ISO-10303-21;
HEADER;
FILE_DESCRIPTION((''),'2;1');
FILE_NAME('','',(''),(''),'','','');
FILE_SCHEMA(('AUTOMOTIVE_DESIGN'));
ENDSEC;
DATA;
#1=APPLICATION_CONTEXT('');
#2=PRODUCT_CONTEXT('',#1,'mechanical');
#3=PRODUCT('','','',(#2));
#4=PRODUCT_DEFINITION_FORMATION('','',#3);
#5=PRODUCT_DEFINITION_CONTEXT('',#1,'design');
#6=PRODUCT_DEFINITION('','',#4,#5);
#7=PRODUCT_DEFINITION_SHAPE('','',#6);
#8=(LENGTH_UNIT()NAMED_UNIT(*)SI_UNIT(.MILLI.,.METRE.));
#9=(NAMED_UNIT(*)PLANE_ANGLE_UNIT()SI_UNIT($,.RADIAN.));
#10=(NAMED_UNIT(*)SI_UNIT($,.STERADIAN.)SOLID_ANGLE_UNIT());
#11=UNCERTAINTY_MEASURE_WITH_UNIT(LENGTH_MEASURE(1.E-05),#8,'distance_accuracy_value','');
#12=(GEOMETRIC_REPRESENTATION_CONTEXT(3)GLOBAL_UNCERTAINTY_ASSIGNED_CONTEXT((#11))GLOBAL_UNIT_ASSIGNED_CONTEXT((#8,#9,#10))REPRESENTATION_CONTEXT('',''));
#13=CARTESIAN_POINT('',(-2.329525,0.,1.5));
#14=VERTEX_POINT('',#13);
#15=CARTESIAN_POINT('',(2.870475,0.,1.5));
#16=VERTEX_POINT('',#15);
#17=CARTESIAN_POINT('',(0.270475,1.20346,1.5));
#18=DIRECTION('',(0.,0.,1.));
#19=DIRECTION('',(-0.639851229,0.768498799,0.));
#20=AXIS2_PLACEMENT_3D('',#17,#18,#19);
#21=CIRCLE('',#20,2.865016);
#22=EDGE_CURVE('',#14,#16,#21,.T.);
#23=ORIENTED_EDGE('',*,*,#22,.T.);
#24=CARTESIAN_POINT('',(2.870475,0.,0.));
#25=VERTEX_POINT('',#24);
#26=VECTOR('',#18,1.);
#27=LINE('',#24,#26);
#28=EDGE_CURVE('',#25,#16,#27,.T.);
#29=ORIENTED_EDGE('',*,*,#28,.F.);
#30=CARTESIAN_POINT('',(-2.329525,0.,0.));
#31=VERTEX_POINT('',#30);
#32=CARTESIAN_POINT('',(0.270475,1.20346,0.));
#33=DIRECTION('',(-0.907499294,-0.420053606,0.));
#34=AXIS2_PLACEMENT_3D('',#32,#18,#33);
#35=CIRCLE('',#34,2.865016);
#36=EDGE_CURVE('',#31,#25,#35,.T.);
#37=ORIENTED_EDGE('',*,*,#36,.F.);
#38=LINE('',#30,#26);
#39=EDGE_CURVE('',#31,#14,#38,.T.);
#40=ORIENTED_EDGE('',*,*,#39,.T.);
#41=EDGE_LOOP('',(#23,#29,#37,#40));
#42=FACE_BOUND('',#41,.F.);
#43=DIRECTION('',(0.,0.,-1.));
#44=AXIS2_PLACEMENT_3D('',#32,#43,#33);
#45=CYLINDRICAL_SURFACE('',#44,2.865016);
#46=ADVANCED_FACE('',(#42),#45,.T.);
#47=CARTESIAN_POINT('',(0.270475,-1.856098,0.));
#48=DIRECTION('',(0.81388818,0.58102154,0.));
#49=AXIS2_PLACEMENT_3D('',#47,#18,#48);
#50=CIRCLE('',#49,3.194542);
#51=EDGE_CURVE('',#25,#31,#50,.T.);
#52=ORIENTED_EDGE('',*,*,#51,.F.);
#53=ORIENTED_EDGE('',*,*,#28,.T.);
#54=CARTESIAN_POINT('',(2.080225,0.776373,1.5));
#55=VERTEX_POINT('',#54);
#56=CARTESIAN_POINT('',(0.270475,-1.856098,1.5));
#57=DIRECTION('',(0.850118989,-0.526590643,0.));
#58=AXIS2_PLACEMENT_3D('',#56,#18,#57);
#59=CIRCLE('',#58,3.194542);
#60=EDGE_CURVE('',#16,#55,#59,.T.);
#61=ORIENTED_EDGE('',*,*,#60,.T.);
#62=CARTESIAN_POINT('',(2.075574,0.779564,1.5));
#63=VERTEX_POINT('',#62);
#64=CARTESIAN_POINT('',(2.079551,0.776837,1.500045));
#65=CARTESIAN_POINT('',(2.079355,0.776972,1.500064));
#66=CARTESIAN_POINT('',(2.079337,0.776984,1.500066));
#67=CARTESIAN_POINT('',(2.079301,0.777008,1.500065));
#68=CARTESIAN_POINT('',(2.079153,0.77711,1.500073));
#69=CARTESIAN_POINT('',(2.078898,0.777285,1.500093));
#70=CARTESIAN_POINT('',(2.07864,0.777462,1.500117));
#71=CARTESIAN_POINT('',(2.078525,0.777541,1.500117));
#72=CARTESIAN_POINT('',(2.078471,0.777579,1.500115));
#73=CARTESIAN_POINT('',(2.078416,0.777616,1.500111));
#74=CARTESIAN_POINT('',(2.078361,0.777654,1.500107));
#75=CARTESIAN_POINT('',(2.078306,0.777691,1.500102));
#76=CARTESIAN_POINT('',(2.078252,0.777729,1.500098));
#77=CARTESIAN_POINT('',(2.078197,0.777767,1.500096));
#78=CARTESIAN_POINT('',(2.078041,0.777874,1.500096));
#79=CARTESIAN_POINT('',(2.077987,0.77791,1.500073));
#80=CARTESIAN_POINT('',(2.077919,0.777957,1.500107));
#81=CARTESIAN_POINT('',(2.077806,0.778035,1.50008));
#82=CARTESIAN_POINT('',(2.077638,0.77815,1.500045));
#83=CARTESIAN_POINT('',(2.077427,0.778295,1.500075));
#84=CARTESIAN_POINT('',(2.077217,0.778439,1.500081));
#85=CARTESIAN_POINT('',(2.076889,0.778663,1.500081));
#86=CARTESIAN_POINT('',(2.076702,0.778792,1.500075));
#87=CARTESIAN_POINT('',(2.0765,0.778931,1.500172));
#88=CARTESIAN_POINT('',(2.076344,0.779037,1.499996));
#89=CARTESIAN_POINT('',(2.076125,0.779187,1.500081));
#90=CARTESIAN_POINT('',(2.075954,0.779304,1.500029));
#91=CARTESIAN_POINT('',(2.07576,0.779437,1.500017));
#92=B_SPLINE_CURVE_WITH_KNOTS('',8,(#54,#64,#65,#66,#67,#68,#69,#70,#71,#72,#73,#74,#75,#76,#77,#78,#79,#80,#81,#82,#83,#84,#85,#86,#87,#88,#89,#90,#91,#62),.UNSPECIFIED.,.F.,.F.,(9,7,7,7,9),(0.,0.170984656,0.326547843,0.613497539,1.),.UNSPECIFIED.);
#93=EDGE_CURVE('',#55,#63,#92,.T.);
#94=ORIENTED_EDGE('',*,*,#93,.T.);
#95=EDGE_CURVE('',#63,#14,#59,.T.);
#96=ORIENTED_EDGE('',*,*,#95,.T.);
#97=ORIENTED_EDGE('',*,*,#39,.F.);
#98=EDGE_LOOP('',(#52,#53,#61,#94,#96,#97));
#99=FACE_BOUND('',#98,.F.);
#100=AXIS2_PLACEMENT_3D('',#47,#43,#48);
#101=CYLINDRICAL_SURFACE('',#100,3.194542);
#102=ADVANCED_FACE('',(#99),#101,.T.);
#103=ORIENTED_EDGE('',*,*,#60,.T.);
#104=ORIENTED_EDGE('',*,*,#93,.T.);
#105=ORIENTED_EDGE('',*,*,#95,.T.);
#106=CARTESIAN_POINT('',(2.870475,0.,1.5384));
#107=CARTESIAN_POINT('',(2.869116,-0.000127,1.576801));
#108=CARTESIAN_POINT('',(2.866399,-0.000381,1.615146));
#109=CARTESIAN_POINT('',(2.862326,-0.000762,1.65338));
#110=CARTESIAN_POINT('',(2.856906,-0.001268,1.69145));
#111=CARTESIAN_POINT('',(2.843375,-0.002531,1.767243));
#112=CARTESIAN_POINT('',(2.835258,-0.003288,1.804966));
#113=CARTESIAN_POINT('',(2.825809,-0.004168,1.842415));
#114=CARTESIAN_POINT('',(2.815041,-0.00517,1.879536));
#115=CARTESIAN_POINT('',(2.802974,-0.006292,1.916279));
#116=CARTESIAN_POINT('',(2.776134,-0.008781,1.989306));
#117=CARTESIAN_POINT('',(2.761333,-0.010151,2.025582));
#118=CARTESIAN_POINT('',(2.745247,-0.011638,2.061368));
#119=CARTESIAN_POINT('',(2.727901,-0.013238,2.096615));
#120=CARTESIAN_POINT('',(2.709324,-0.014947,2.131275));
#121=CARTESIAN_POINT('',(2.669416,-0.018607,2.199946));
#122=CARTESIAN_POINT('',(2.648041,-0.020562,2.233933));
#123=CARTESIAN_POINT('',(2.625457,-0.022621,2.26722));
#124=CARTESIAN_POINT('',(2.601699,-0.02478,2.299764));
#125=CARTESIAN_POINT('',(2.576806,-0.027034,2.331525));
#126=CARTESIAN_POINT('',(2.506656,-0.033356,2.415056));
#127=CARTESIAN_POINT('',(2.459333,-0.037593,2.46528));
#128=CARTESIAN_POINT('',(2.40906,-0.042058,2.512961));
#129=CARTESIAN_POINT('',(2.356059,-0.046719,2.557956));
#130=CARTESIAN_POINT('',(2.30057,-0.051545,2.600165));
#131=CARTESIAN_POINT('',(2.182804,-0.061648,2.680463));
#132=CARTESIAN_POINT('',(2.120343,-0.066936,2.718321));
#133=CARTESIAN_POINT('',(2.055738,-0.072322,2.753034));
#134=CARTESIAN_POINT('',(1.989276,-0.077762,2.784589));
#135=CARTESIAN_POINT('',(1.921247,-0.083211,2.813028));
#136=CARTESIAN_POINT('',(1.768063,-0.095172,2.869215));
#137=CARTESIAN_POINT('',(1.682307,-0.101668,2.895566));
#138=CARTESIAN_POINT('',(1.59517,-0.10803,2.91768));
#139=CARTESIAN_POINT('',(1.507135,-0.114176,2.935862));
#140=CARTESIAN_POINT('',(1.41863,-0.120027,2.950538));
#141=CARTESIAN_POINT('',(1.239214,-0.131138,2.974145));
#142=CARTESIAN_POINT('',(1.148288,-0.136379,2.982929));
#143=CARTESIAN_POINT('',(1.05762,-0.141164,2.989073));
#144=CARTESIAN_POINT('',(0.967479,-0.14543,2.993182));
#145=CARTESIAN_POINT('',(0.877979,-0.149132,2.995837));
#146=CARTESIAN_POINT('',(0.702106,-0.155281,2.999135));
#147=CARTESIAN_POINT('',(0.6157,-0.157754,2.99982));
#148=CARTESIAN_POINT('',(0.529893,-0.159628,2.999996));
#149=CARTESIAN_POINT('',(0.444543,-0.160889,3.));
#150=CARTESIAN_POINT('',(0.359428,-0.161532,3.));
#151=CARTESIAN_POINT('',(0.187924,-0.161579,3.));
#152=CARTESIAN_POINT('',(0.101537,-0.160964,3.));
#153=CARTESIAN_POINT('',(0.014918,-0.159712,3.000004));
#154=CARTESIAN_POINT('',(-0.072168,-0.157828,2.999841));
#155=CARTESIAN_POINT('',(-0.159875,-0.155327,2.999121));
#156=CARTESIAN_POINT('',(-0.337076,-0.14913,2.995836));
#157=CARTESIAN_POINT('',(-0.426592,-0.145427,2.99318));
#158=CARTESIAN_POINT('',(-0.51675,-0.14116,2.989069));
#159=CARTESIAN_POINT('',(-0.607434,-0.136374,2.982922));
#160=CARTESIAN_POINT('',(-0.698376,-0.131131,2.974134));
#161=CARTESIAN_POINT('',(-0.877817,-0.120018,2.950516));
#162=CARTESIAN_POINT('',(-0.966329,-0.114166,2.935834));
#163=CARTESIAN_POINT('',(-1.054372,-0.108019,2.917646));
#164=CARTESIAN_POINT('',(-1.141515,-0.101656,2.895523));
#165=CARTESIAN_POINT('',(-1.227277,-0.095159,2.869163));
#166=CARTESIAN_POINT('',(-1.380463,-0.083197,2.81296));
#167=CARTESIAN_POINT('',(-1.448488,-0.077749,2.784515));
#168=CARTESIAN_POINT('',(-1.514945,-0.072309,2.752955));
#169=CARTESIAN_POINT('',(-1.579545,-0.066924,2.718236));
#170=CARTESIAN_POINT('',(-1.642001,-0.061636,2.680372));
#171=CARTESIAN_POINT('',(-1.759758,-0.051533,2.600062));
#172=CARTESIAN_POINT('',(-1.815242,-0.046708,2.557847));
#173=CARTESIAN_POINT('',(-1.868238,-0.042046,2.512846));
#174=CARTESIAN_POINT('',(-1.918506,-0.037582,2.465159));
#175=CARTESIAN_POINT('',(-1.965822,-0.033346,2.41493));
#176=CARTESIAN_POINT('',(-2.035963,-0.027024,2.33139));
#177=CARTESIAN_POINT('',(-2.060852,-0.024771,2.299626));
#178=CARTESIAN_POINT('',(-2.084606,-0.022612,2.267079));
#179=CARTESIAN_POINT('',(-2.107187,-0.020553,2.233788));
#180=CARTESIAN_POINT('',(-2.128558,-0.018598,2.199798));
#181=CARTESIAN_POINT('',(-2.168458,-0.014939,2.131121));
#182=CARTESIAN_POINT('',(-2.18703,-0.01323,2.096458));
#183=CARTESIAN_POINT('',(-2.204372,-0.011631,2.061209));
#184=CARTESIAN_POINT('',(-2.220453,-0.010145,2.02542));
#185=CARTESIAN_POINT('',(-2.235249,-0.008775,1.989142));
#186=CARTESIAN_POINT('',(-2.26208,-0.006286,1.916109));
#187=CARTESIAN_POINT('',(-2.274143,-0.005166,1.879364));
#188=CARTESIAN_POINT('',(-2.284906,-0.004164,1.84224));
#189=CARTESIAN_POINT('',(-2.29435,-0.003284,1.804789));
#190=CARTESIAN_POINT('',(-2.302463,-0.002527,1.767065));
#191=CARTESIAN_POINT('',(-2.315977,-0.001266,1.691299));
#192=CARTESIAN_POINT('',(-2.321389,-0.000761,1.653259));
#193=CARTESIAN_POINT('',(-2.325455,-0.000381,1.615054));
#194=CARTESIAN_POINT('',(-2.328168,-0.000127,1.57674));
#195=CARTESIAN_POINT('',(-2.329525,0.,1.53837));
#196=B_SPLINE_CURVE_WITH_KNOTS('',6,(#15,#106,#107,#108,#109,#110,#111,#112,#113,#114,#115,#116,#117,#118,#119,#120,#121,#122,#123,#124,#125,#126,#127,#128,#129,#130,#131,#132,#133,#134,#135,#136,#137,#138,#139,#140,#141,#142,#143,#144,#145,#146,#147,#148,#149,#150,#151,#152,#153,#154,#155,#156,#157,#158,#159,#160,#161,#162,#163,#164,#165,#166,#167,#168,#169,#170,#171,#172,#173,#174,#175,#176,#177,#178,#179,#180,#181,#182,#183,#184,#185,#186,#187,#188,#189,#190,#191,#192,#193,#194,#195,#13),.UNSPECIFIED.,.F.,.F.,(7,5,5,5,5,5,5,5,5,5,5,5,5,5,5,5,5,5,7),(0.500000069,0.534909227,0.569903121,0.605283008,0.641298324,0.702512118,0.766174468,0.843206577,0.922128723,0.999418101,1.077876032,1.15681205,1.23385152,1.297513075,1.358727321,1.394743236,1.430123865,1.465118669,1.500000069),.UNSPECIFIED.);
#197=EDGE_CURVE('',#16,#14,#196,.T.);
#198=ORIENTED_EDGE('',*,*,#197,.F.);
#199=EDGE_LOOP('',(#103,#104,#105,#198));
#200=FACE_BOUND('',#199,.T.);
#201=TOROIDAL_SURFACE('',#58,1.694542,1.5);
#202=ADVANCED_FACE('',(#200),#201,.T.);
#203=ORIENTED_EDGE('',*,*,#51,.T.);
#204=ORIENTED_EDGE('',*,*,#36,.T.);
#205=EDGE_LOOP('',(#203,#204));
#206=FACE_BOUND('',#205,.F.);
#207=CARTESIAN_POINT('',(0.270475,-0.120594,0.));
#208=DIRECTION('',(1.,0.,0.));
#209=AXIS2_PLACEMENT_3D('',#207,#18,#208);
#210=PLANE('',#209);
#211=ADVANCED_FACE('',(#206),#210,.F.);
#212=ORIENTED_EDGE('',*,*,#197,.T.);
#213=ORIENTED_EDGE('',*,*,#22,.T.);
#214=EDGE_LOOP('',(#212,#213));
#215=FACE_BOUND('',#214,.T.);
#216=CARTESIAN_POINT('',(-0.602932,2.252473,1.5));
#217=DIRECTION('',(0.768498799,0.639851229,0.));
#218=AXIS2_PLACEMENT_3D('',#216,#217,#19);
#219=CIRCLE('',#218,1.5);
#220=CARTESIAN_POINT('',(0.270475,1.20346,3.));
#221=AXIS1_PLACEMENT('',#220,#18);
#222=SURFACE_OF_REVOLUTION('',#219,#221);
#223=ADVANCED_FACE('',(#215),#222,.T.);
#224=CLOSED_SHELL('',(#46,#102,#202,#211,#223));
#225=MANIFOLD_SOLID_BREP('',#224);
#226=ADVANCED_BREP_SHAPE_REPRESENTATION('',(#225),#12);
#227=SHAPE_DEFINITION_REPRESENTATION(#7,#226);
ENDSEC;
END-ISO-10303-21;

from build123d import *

# Parameters (mm, degrees)
F1_DEPTH    = 3
F2_T2_ANGLE = 243.5507728325
F2_T4_ANGLE = 280.4385461562


# Not quite as in the source:
# - a fillet or chamfer that OpenCascade refuses, or shapes differently, is made with other operations: its cross-section is extruded or revolved along the edge and cut away or added


with BuildPart() as f1:
    # F0 (on Top) → F1 (new body)
    with BuildSketch(Plane.XY):
        with BuildLine():
            ThreePointArc((-2.3295248933, 0), (0.2704751067, -1.6615556993), (2.8704751067, 0))
            ThreePointArc((2.8704751067, 0), (0.2704751067, 1.3384443007), (-2.3295248933, 0))
        make_face()
    extrude(amount=F1_DEPTH)

    # F2: fillet of radius 1.5 on 2 edges, made by hand

    # F2_s1 → F2_t2 (revolve, cut)
    with BuildSketch(Plane(origin=(-0.7559073156, -1.2203239289, 0), x_dir=(0, 0, 1), z_dir=(-0.5265906431, -0.8501189885, 0))):
        with BuildLine():
            ThreePointArc((1.5, -4.4018817505), (2.5606601718, -3.9625419223), (3, -2.9018817505))
            Line((3, -2.9018817505), (3, -4.4018817505))
            Line((3, -4.4018817505), (1.5, -4.4018817505))
        make_face()
    revolve(axis=Axis((0.2704751067, -1.856097729, 3), (0, 0, 1)), revolution_arc=F2_T2_ANGLE, mode=Mode.SUBTRACT)

    # F2_s3 → F2_t4 (revolve, cut)
    with BuildSketch(Plane(origin=(0.7515114026, 0.6257075418, 0), x_dir=(0, 0, 1), z_dir=(0.7684987994, 0.6398512291, 0))):
        with BuildLine():
            ThreePointArc((1.5, -3.6168099748), (2.5606601718, -3.1774701466), (3, -2.1168099748))
            Line((3, -2.1168099748), (3, -3.6168099748))
            Line((3, -3.6168099748), (1.5, -3.6168099748))
        make_face()
    revolve(axis=Axis((0.2704751067, 1.2034603053, 3), (0, 0, 1)), revolution_arc=F2_T4_ANGLE, mode=Mode.SUBTRACT)


solid = f1.part
